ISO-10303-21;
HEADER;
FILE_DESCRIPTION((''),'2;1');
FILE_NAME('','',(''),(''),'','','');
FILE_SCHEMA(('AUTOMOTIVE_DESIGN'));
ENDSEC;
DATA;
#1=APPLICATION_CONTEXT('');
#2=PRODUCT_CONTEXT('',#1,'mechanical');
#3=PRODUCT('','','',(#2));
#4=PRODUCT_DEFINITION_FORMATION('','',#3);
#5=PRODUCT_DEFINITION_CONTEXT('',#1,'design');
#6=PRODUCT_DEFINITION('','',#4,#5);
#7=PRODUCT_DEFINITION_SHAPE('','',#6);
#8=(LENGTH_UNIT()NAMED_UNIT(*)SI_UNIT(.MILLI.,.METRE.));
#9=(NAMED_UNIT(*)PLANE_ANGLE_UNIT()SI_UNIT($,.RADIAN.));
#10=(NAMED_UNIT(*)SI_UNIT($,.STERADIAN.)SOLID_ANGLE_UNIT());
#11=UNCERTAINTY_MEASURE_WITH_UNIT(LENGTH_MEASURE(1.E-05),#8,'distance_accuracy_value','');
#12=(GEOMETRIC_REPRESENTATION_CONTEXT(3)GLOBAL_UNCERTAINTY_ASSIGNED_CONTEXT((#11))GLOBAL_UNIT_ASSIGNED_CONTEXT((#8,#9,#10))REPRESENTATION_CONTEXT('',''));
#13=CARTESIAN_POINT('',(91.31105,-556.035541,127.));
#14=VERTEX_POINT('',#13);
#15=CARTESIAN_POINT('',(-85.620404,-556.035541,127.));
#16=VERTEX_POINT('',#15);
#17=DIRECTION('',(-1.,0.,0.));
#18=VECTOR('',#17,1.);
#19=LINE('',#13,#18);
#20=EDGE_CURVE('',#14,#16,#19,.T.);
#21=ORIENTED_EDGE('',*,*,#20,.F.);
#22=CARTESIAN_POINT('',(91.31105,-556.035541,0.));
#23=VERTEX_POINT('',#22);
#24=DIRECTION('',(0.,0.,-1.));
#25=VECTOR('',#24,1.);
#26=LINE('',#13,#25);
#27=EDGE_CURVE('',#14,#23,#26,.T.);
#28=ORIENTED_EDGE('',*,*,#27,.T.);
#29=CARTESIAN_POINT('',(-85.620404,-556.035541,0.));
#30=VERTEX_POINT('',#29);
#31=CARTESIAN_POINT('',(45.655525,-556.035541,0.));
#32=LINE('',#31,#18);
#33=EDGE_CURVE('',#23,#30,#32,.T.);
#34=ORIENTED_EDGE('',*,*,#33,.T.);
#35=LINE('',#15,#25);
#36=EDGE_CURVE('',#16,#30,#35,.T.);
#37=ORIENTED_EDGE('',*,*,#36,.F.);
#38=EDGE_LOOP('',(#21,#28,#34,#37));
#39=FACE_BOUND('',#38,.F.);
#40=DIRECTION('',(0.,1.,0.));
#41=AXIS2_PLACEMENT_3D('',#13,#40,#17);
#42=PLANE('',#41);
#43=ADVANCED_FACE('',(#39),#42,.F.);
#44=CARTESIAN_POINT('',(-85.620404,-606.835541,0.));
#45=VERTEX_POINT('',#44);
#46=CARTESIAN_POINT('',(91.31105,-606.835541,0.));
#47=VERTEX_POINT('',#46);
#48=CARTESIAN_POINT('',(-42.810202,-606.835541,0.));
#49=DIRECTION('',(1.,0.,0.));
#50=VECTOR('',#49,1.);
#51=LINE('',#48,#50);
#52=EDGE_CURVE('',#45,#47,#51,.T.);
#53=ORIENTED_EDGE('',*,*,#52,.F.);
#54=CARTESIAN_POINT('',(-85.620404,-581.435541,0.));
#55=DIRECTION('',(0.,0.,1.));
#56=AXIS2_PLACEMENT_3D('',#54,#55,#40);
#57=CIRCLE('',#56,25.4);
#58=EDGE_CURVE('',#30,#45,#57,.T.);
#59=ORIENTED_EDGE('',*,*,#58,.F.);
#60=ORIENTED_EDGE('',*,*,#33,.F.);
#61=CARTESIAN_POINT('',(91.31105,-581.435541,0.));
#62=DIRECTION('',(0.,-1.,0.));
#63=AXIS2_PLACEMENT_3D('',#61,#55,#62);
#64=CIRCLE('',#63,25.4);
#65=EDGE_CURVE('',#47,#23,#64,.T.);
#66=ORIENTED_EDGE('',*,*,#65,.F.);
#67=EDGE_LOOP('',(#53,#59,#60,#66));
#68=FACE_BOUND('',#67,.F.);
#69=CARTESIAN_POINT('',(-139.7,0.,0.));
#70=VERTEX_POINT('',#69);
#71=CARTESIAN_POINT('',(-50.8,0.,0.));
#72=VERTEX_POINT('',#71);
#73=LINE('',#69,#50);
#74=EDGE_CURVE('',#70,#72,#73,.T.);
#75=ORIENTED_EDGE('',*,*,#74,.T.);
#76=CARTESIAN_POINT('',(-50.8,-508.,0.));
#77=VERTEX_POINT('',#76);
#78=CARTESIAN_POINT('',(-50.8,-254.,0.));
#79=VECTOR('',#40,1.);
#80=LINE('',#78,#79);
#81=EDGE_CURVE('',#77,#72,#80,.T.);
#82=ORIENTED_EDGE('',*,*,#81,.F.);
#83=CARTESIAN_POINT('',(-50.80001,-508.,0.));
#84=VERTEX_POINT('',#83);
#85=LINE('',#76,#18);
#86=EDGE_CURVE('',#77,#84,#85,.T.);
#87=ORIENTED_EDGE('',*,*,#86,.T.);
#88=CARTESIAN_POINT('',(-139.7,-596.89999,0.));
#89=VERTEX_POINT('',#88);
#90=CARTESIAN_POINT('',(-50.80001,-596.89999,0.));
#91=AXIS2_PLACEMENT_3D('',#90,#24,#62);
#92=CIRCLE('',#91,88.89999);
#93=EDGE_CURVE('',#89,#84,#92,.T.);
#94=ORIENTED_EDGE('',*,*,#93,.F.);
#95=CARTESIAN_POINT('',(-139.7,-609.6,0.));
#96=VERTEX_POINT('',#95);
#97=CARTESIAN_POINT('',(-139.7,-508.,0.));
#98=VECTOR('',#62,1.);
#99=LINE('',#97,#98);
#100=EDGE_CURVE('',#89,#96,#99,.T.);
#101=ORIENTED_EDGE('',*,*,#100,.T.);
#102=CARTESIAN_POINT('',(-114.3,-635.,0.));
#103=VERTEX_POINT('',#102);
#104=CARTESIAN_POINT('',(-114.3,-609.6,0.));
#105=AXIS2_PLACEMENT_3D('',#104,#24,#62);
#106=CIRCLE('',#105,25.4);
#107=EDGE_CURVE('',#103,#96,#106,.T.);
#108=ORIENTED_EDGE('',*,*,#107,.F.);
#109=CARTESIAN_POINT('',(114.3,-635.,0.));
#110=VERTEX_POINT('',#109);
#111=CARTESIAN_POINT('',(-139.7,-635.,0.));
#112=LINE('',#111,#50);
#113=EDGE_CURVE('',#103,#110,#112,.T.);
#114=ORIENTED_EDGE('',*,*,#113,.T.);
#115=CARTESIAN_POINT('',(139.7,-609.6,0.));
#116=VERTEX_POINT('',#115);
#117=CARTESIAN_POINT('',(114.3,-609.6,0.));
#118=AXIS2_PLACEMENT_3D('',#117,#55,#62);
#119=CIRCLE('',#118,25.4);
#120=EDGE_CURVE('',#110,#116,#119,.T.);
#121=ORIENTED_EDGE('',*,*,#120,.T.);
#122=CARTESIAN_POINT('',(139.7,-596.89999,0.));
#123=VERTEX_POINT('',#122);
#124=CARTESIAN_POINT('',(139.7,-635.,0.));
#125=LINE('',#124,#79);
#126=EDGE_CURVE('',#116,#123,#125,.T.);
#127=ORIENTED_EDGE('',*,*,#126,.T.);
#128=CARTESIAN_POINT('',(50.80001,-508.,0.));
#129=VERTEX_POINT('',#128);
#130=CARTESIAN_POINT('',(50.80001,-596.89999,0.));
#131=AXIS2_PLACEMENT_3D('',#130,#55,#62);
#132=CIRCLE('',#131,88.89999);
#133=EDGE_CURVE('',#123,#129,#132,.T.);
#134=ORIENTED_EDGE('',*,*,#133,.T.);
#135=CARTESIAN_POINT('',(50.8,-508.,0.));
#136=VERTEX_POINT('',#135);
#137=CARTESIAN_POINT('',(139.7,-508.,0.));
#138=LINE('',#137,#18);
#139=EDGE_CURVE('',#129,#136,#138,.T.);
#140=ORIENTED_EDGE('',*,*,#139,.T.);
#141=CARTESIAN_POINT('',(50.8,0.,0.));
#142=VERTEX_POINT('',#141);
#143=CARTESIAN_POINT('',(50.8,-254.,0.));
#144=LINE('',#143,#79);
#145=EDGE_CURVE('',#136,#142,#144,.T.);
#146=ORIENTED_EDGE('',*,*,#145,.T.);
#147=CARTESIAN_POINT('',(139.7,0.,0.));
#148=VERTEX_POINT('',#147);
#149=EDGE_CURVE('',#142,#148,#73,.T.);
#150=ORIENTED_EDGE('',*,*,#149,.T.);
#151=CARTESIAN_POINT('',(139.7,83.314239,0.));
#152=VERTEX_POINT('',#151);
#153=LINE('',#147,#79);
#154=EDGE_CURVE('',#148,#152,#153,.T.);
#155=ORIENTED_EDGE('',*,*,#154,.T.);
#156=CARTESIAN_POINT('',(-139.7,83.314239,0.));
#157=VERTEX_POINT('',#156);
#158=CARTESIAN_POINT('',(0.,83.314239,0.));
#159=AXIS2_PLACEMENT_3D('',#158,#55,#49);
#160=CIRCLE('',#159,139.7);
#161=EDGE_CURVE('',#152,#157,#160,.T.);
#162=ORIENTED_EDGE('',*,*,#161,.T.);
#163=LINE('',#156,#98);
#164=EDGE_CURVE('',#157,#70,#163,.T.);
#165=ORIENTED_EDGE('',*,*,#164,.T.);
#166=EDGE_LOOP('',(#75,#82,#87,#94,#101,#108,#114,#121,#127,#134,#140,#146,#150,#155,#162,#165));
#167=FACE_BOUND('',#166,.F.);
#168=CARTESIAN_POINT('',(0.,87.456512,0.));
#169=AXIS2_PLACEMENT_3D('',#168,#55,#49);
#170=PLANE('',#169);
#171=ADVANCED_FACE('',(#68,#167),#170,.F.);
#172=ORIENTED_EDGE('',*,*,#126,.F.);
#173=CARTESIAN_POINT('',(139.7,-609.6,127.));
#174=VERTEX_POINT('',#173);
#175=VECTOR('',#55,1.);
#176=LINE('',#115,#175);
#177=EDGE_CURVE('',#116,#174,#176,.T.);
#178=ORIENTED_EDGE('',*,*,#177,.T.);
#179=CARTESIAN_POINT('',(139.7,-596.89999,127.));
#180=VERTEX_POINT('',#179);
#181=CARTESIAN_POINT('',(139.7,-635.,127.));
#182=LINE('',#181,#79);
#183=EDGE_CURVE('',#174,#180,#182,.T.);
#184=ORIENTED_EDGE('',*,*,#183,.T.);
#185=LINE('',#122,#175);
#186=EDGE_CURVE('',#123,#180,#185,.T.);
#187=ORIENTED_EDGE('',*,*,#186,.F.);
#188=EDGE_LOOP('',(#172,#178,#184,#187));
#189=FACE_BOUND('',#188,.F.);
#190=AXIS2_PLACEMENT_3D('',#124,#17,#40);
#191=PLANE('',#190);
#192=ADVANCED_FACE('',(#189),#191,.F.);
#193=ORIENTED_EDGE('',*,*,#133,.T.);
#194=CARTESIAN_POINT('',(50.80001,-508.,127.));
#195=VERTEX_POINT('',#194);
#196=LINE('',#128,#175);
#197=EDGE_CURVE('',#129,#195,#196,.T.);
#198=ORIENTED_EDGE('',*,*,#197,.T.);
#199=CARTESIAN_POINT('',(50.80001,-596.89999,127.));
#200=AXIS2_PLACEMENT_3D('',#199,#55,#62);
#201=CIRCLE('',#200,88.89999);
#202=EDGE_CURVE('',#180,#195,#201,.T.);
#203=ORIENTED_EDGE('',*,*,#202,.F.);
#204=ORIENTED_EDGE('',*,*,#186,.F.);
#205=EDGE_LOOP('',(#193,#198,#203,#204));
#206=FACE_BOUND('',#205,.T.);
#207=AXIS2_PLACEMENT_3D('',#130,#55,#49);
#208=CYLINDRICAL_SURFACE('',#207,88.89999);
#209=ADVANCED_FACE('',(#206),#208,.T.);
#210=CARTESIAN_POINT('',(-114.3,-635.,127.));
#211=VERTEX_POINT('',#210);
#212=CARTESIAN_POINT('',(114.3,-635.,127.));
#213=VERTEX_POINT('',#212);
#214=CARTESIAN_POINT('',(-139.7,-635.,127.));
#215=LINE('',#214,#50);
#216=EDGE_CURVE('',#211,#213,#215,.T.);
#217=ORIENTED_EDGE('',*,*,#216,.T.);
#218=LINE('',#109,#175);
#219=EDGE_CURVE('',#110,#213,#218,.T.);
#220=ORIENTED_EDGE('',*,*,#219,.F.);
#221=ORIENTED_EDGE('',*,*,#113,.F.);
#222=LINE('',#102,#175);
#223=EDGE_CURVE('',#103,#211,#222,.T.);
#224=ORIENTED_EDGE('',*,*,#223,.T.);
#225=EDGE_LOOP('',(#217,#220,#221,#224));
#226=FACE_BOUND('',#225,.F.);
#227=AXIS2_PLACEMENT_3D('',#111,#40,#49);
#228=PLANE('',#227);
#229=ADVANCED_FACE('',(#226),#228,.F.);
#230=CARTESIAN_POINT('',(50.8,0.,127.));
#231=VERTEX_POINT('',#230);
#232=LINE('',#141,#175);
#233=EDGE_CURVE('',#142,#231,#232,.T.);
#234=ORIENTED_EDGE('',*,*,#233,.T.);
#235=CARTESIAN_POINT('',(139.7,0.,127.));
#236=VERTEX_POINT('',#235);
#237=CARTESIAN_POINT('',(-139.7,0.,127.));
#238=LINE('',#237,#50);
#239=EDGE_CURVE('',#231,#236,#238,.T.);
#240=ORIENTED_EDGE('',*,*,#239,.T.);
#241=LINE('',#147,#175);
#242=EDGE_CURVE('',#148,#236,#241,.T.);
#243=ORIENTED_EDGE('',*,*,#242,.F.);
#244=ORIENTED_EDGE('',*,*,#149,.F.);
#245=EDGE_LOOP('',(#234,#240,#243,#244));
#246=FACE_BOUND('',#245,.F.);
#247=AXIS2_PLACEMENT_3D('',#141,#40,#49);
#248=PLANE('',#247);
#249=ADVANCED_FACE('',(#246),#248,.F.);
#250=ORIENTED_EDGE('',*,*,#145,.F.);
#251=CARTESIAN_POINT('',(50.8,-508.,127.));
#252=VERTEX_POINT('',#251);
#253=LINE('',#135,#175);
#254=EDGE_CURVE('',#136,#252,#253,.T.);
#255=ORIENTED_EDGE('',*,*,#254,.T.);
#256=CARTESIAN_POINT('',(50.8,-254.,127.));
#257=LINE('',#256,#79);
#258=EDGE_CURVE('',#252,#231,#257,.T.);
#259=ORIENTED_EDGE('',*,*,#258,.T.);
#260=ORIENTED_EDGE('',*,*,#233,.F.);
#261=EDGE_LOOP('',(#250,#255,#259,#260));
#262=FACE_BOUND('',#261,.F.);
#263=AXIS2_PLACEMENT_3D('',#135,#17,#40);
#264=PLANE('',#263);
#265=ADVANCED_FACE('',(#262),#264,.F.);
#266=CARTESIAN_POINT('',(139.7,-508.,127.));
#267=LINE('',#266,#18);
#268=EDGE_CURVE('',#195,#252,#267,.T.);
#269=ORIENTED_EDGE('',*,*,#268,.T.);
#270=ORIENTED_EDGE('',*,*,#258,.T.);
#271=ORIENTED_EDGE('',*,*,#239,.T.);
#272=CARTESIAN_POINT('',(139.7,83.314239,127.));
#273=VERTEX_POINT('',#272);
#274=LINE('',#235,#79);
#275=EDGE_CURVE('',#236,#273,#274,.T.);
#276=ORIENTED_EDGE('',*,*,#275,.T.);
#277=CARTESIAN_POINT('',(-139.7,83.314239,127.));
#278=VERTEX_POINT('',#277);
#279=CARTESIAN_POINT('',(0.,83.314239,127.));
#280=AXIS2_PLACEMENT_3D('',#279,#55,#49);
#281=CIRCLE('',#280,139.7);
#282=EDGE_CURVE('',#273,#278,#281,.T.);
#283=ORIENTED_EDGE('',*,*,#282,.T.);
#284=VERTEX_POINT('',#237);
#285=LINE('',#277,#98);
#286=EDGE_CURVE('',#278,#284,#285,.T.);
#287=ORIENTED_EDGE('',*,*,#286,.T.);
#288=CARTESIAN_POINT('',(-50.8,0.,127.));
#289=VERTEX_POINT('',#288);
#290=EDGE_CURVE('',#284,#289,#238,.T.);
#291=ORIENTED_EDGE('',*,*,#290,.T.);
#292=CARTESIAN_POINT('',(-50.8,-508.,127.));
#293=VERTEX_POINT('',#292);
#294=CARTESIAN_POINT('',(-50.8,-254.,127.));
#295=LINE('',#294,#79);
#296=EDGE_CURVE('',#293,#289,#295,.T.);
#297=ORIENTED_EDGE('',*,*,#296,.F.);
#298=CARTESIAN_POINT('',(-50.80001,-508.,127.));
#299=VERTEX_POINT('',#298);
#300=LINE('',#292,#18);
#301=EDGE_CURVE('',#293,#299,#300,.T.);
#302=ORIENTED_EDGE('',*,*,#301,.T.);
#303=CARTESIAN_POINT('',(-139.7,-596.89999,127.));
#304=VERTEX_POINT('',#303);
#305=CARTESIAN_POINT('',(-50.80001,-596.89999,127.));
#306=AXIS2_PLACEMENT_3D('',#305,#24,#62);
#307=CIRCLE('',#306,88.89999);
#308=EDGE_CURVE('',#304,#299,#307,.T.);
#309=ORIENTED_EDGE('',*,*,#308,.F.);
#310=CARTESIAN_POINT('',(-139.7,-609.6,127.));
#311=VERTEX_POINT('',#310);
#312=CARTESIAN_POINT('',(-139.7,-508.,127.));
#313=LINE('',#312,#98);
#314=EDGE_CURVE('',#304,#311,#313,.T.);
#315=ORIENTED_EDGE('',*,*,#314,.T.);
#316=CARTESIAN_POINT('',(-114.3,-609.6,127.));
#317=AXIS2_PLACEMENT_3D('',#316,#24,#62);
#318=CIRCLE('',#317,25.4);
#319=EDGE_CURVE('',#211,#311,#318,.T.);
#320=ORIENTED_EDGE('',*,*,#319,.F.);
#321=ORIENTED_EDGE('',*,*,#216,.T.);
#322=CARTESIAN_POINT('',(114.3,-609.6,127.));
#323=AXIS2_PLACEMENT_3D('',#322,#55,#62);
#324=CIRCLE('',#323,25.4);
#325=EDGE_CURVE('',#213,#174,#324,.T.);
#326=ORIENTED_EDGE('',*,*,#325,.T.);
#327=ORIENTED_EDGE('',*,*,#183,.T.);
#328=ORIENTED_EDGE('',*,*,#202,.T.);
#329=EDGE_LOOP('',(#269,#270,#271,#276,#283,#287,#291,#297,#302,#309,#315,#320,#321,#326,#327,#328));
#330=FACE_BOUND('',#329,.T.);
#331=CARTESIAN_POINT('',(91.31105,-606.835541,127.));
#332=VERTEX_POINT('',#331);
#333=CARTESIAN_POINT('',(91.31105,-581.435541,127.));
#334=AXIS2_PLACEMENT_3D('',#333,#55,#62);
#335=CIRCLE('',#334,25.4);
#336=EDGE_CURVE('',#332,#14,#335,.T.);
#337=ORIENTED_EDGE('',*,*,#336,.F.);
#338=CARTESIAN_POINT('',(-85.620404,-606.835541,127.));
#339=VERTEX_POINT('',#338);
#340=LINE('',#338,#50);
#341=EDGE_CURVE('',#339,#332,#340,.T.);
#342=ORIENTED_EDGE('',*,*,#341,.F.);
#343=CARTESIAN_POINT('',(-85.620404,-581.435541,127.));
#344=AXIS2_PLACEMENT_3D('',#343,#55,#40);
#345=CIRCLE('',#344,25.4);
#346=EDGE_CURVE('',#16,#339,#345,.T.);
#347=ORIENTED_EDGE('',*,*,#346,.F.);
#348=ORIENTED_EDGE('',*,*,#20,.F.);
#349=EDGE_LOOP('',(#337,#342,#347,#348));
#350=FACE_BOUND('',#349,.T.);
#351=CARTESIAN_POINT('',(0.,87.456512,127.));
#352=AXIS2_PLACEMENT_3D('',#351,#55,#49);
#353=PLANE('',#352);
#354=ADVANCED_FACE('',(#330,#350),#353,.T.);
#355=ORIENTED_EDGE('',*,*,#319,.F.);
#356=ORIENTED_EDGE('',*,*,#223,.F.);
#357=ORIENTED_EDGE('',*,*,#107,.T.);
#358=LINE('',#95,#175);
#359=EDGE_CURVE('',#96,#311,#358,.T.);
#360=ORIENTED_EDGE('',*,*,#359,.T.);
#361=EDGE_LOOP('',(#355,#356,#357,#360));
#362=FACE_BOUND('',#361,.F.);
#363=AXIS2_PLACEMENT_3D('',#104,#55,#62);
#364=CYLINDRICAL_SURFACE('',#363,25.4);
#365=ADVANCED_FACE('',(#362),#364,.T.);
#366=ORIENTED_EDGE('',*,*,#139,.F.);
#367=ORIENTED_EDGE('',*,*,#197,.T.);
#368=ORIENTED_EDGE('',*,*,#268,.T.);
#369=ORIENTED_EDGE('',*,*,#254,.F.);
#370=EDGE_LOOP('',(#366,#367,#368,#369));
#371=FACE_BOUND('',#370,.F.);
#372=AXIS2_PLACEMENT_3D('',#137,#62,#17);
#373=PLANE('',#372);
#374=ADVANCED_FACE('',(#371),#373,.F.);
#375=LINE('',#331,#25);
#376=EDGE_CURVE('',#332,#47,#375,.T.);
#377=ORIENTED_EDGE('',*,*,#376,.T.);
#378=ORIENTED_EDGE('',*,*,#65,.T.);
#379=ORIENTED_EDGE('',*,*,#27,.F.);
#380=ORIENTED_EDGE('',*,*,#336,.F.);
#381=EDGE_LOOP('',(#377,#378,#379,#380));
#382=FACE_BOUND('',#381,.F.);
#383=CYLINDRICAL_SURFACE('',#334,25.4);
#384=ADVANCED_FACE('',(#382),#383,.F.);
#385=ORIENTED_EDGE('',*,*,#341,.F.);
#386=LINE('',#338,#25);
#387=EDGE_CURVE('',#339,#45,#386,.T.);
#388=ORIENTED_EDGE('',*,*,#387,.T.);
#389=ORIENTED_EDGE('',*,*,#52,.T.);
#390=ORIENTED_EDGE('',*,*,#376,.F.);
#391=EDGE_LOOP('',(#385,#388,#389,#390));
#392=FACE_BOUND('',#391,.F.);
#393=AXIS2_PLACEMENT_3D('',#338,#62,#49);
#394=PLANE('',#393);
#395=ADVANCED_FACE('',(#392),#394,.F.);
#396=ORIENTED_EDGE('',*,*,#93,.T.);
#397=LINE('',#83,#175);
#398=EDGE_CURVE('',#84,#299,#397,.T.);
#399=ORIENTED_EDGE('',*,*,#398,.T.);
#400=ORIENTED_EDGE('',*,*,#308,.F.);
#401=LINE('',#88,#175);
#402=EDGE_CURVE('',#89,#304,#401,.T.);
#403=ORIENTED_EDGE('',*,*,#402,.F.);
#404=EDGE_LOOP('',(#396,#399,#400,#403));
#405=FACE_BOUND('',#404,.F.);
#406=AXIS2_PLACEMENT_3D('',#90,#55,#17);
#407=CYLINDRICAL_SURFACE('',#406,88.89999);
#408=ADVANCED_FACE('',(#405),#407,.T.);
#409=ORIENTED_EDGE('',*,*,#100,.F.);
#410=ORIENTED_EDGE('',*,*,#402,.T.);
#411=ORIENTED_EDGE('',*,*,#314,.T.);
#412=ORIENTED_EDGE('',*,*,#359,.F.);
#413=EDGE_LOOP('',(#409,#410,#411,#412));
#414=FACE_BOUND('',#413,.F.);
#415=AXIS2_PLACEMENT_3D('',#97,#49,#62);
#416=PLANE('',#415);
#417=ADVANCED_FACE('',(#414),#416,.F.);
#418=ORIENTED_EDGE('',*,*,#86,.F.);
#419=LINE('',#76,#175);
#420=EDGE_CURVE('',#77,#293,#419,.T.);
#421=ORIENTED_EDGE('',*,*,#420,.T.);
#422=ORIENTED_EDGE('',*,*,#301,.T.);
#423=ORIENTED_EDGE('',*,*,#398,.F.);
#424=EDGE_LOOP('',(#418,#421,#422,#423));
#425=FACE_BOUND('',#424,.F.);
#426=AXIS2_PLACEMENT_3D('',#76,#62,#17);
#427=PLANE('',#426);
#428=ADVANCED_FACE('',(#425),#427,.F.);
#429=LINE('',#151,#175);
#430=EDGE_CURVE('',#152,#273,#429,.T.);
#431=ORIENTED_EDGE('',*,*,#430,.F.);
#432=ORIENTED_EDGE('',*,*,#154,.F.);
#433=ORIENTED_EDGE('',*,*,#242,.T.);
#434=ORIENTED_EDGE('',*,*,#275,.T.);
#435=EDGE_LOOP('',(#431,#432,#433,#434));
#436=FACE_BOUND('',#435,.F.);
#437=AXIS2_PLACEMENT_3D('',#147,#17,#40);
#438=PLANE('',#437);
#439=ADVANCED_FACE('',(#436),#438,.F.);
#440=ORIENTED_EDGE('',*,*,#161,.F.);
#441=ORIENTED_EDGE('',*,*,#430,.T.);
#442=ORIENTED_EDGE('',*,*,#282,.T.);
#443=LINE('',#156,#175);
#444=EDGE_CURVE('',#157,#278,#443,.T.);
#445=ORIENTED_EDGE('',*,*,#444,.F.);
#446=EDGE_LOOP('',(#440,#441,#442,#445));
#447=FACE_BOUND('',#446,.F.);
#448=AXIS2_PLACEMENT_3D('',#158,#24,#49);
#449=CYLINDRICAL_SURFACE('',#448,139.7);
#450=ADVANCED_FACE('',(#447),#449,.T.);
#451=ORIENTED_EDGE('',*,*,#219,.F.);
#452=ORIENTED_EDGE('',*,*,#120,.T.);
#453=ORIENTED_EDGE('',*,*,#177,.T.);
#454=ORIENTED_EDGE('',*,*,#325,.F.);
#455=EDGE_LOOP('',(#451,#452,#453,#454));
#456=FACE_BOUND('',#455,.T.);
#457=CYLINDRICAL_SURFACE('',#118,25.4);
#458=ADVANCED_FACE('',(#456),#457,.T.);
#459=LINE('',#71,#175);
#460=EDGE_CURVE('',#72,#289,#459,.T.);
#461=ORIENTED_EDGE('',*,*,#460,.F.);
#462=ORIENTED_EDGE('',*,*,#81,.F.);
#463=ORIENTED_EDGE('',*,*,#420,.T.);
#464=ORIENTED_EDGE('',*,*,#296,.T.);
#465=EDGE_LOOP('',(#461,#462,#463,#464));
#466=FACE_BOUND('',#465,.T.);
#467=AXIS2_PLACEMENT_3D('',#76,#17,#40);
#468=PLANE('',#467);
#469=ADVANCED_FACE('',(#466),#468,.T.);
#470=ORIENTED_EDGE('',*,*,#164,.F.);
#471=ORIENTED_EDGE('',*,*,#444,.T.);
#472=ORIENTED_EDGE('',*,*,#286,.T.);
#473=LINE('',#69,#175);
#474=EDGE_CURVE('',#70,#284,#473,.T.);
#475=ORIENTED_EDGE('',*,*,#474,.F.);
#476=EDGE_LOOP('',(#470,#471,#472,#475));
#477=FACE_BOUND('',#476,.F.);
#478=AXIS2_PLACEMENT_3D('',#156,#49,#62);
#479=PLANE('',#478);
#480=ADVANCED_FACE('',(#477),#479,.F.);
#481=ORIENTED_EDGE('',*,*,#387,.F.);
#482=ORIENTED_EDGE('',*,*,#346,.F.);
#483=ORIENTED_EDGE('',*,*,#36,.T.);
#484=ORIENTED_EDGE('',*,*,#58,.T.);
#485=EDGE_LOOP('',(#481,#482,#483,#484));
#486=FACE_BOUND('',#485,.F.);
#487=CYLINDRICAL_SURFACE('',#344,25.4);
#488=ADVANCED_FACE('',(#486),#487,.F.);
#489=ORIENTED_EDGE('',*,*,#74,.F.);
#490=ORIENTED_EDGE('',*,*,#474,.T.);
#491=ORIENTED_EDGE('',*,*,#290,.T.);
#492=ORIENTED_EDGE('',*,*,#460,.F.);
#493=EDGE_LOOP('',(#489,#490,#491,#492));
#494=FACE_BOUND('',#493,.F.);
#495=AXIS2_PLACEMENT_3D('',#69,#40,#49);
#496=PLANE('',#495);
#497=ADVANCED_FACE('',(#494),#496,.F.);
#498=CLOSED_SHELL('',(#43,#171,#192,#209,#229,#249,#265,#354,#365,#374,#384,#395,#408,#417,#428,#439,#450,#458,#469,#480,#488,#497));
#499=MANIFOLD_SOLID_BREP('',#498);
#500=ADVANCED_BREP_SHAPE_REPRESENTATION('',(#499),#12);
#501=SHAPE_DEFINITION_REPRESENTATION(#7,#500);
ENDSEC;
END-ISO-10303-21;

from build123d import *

# Parameters (mm, degrees)
F0_W     = 101.6
F0_H     = 508
F1_DEPTH = 127
F2_R     = 88.89999
F3_R     = 88.89999
F5_DEPTH = 127.001
F6_R     = 25.4
F7_R     = 25.4


# Not quite as in the source:
# - a fillet or chamfer is up to 0.001 mm smaller than in the source, because OpenCascade refuses the exact size


with BuildPart() as f1:
    # F0 (on Top) → F1 (new body)
    with BuildSketch(Plane.XY):
        with BuildLine():
            ThreePointArc((139.7, 83.3142390684), (0, 223.0142390684), (-139.7, 83.3142390684))
            Line((-139.7, 83.3142390684), (-139.7, 0))
            Line((-139.7, 0), (-50.8, 0))
            Line((-50.8, 0), (50.8, 0))
            Line((50.8, 0), (139.7, 0))
            Line((139.7, 0), (139.7, 83.3142390684))
        make_face()
        with Locations((0, -254)):
            Rectangle(F0_W, F0_H)
        Polygon((50.8, -508), (-50.8, -508), (-139.7, -508), (-139.7, -635), (139.7, -635), (139.7, -508), align=None)
    extrude(amount=F1_DEPTH)

    # F2 (radius 88.9 in the source; OpenCascade refuses exactly that, so slightly less here)
    f2_edges = [f1.edges().sort_by_distance(p)[0] for p in [
        (139.7, -508, 63.5),
    ]]
    fillet(f2_edges, radius=F2_R)

    # F3 (radius 88.9 in the source; OpenCascade refuses exactly that, so slightly less here)
    f3_edges = [f1.edges().sort_by_distance(p)[0] for p in [
        (-139.7, -508, 63.5),
    ]]
    fillet(f3_edges, radius=F3_R)

    # F4 (on face) → F5 (cut, through all)
    with BuildSketch(Plane.XY.offset(127)):
        with BuildLine():
            Line((91.3110496293, -556.0355413279), (-85.6204037596, -556.0355413279))
            ThreePointArc((-85.6204037596, -556.0355413279), (-111.0204037596, -581.4355413279), (-85.6204037596, -606.8355413279))
            Line((-85.6204037596, -606.8355413279), (91.3110496293, -606.8355413279))
            ThreePointArc((91.3110496293, -606.8355413279), (116.7110496293, -581.4355413279), (91.3110496293, -556.0355413279))
        make_face()
    extrude(amount=-F5_DEPTH, mode=Mode.SUBTRACT)

    # F6
    f6_edges = [f1.edges().sort_by_distance(p)[0] for p in [
        (139.7, -635, 63.5),
    ]]
    fillet(f6_edges, radius=F6_R)

    # F7
    f7_edges = [f1.edges().sort_by_distance(p)[0] for p in [
        (-139.7, -635, 63.5),
    ]]
    fillet(f7_edges, radius=F7_R)


solid = f1.part
